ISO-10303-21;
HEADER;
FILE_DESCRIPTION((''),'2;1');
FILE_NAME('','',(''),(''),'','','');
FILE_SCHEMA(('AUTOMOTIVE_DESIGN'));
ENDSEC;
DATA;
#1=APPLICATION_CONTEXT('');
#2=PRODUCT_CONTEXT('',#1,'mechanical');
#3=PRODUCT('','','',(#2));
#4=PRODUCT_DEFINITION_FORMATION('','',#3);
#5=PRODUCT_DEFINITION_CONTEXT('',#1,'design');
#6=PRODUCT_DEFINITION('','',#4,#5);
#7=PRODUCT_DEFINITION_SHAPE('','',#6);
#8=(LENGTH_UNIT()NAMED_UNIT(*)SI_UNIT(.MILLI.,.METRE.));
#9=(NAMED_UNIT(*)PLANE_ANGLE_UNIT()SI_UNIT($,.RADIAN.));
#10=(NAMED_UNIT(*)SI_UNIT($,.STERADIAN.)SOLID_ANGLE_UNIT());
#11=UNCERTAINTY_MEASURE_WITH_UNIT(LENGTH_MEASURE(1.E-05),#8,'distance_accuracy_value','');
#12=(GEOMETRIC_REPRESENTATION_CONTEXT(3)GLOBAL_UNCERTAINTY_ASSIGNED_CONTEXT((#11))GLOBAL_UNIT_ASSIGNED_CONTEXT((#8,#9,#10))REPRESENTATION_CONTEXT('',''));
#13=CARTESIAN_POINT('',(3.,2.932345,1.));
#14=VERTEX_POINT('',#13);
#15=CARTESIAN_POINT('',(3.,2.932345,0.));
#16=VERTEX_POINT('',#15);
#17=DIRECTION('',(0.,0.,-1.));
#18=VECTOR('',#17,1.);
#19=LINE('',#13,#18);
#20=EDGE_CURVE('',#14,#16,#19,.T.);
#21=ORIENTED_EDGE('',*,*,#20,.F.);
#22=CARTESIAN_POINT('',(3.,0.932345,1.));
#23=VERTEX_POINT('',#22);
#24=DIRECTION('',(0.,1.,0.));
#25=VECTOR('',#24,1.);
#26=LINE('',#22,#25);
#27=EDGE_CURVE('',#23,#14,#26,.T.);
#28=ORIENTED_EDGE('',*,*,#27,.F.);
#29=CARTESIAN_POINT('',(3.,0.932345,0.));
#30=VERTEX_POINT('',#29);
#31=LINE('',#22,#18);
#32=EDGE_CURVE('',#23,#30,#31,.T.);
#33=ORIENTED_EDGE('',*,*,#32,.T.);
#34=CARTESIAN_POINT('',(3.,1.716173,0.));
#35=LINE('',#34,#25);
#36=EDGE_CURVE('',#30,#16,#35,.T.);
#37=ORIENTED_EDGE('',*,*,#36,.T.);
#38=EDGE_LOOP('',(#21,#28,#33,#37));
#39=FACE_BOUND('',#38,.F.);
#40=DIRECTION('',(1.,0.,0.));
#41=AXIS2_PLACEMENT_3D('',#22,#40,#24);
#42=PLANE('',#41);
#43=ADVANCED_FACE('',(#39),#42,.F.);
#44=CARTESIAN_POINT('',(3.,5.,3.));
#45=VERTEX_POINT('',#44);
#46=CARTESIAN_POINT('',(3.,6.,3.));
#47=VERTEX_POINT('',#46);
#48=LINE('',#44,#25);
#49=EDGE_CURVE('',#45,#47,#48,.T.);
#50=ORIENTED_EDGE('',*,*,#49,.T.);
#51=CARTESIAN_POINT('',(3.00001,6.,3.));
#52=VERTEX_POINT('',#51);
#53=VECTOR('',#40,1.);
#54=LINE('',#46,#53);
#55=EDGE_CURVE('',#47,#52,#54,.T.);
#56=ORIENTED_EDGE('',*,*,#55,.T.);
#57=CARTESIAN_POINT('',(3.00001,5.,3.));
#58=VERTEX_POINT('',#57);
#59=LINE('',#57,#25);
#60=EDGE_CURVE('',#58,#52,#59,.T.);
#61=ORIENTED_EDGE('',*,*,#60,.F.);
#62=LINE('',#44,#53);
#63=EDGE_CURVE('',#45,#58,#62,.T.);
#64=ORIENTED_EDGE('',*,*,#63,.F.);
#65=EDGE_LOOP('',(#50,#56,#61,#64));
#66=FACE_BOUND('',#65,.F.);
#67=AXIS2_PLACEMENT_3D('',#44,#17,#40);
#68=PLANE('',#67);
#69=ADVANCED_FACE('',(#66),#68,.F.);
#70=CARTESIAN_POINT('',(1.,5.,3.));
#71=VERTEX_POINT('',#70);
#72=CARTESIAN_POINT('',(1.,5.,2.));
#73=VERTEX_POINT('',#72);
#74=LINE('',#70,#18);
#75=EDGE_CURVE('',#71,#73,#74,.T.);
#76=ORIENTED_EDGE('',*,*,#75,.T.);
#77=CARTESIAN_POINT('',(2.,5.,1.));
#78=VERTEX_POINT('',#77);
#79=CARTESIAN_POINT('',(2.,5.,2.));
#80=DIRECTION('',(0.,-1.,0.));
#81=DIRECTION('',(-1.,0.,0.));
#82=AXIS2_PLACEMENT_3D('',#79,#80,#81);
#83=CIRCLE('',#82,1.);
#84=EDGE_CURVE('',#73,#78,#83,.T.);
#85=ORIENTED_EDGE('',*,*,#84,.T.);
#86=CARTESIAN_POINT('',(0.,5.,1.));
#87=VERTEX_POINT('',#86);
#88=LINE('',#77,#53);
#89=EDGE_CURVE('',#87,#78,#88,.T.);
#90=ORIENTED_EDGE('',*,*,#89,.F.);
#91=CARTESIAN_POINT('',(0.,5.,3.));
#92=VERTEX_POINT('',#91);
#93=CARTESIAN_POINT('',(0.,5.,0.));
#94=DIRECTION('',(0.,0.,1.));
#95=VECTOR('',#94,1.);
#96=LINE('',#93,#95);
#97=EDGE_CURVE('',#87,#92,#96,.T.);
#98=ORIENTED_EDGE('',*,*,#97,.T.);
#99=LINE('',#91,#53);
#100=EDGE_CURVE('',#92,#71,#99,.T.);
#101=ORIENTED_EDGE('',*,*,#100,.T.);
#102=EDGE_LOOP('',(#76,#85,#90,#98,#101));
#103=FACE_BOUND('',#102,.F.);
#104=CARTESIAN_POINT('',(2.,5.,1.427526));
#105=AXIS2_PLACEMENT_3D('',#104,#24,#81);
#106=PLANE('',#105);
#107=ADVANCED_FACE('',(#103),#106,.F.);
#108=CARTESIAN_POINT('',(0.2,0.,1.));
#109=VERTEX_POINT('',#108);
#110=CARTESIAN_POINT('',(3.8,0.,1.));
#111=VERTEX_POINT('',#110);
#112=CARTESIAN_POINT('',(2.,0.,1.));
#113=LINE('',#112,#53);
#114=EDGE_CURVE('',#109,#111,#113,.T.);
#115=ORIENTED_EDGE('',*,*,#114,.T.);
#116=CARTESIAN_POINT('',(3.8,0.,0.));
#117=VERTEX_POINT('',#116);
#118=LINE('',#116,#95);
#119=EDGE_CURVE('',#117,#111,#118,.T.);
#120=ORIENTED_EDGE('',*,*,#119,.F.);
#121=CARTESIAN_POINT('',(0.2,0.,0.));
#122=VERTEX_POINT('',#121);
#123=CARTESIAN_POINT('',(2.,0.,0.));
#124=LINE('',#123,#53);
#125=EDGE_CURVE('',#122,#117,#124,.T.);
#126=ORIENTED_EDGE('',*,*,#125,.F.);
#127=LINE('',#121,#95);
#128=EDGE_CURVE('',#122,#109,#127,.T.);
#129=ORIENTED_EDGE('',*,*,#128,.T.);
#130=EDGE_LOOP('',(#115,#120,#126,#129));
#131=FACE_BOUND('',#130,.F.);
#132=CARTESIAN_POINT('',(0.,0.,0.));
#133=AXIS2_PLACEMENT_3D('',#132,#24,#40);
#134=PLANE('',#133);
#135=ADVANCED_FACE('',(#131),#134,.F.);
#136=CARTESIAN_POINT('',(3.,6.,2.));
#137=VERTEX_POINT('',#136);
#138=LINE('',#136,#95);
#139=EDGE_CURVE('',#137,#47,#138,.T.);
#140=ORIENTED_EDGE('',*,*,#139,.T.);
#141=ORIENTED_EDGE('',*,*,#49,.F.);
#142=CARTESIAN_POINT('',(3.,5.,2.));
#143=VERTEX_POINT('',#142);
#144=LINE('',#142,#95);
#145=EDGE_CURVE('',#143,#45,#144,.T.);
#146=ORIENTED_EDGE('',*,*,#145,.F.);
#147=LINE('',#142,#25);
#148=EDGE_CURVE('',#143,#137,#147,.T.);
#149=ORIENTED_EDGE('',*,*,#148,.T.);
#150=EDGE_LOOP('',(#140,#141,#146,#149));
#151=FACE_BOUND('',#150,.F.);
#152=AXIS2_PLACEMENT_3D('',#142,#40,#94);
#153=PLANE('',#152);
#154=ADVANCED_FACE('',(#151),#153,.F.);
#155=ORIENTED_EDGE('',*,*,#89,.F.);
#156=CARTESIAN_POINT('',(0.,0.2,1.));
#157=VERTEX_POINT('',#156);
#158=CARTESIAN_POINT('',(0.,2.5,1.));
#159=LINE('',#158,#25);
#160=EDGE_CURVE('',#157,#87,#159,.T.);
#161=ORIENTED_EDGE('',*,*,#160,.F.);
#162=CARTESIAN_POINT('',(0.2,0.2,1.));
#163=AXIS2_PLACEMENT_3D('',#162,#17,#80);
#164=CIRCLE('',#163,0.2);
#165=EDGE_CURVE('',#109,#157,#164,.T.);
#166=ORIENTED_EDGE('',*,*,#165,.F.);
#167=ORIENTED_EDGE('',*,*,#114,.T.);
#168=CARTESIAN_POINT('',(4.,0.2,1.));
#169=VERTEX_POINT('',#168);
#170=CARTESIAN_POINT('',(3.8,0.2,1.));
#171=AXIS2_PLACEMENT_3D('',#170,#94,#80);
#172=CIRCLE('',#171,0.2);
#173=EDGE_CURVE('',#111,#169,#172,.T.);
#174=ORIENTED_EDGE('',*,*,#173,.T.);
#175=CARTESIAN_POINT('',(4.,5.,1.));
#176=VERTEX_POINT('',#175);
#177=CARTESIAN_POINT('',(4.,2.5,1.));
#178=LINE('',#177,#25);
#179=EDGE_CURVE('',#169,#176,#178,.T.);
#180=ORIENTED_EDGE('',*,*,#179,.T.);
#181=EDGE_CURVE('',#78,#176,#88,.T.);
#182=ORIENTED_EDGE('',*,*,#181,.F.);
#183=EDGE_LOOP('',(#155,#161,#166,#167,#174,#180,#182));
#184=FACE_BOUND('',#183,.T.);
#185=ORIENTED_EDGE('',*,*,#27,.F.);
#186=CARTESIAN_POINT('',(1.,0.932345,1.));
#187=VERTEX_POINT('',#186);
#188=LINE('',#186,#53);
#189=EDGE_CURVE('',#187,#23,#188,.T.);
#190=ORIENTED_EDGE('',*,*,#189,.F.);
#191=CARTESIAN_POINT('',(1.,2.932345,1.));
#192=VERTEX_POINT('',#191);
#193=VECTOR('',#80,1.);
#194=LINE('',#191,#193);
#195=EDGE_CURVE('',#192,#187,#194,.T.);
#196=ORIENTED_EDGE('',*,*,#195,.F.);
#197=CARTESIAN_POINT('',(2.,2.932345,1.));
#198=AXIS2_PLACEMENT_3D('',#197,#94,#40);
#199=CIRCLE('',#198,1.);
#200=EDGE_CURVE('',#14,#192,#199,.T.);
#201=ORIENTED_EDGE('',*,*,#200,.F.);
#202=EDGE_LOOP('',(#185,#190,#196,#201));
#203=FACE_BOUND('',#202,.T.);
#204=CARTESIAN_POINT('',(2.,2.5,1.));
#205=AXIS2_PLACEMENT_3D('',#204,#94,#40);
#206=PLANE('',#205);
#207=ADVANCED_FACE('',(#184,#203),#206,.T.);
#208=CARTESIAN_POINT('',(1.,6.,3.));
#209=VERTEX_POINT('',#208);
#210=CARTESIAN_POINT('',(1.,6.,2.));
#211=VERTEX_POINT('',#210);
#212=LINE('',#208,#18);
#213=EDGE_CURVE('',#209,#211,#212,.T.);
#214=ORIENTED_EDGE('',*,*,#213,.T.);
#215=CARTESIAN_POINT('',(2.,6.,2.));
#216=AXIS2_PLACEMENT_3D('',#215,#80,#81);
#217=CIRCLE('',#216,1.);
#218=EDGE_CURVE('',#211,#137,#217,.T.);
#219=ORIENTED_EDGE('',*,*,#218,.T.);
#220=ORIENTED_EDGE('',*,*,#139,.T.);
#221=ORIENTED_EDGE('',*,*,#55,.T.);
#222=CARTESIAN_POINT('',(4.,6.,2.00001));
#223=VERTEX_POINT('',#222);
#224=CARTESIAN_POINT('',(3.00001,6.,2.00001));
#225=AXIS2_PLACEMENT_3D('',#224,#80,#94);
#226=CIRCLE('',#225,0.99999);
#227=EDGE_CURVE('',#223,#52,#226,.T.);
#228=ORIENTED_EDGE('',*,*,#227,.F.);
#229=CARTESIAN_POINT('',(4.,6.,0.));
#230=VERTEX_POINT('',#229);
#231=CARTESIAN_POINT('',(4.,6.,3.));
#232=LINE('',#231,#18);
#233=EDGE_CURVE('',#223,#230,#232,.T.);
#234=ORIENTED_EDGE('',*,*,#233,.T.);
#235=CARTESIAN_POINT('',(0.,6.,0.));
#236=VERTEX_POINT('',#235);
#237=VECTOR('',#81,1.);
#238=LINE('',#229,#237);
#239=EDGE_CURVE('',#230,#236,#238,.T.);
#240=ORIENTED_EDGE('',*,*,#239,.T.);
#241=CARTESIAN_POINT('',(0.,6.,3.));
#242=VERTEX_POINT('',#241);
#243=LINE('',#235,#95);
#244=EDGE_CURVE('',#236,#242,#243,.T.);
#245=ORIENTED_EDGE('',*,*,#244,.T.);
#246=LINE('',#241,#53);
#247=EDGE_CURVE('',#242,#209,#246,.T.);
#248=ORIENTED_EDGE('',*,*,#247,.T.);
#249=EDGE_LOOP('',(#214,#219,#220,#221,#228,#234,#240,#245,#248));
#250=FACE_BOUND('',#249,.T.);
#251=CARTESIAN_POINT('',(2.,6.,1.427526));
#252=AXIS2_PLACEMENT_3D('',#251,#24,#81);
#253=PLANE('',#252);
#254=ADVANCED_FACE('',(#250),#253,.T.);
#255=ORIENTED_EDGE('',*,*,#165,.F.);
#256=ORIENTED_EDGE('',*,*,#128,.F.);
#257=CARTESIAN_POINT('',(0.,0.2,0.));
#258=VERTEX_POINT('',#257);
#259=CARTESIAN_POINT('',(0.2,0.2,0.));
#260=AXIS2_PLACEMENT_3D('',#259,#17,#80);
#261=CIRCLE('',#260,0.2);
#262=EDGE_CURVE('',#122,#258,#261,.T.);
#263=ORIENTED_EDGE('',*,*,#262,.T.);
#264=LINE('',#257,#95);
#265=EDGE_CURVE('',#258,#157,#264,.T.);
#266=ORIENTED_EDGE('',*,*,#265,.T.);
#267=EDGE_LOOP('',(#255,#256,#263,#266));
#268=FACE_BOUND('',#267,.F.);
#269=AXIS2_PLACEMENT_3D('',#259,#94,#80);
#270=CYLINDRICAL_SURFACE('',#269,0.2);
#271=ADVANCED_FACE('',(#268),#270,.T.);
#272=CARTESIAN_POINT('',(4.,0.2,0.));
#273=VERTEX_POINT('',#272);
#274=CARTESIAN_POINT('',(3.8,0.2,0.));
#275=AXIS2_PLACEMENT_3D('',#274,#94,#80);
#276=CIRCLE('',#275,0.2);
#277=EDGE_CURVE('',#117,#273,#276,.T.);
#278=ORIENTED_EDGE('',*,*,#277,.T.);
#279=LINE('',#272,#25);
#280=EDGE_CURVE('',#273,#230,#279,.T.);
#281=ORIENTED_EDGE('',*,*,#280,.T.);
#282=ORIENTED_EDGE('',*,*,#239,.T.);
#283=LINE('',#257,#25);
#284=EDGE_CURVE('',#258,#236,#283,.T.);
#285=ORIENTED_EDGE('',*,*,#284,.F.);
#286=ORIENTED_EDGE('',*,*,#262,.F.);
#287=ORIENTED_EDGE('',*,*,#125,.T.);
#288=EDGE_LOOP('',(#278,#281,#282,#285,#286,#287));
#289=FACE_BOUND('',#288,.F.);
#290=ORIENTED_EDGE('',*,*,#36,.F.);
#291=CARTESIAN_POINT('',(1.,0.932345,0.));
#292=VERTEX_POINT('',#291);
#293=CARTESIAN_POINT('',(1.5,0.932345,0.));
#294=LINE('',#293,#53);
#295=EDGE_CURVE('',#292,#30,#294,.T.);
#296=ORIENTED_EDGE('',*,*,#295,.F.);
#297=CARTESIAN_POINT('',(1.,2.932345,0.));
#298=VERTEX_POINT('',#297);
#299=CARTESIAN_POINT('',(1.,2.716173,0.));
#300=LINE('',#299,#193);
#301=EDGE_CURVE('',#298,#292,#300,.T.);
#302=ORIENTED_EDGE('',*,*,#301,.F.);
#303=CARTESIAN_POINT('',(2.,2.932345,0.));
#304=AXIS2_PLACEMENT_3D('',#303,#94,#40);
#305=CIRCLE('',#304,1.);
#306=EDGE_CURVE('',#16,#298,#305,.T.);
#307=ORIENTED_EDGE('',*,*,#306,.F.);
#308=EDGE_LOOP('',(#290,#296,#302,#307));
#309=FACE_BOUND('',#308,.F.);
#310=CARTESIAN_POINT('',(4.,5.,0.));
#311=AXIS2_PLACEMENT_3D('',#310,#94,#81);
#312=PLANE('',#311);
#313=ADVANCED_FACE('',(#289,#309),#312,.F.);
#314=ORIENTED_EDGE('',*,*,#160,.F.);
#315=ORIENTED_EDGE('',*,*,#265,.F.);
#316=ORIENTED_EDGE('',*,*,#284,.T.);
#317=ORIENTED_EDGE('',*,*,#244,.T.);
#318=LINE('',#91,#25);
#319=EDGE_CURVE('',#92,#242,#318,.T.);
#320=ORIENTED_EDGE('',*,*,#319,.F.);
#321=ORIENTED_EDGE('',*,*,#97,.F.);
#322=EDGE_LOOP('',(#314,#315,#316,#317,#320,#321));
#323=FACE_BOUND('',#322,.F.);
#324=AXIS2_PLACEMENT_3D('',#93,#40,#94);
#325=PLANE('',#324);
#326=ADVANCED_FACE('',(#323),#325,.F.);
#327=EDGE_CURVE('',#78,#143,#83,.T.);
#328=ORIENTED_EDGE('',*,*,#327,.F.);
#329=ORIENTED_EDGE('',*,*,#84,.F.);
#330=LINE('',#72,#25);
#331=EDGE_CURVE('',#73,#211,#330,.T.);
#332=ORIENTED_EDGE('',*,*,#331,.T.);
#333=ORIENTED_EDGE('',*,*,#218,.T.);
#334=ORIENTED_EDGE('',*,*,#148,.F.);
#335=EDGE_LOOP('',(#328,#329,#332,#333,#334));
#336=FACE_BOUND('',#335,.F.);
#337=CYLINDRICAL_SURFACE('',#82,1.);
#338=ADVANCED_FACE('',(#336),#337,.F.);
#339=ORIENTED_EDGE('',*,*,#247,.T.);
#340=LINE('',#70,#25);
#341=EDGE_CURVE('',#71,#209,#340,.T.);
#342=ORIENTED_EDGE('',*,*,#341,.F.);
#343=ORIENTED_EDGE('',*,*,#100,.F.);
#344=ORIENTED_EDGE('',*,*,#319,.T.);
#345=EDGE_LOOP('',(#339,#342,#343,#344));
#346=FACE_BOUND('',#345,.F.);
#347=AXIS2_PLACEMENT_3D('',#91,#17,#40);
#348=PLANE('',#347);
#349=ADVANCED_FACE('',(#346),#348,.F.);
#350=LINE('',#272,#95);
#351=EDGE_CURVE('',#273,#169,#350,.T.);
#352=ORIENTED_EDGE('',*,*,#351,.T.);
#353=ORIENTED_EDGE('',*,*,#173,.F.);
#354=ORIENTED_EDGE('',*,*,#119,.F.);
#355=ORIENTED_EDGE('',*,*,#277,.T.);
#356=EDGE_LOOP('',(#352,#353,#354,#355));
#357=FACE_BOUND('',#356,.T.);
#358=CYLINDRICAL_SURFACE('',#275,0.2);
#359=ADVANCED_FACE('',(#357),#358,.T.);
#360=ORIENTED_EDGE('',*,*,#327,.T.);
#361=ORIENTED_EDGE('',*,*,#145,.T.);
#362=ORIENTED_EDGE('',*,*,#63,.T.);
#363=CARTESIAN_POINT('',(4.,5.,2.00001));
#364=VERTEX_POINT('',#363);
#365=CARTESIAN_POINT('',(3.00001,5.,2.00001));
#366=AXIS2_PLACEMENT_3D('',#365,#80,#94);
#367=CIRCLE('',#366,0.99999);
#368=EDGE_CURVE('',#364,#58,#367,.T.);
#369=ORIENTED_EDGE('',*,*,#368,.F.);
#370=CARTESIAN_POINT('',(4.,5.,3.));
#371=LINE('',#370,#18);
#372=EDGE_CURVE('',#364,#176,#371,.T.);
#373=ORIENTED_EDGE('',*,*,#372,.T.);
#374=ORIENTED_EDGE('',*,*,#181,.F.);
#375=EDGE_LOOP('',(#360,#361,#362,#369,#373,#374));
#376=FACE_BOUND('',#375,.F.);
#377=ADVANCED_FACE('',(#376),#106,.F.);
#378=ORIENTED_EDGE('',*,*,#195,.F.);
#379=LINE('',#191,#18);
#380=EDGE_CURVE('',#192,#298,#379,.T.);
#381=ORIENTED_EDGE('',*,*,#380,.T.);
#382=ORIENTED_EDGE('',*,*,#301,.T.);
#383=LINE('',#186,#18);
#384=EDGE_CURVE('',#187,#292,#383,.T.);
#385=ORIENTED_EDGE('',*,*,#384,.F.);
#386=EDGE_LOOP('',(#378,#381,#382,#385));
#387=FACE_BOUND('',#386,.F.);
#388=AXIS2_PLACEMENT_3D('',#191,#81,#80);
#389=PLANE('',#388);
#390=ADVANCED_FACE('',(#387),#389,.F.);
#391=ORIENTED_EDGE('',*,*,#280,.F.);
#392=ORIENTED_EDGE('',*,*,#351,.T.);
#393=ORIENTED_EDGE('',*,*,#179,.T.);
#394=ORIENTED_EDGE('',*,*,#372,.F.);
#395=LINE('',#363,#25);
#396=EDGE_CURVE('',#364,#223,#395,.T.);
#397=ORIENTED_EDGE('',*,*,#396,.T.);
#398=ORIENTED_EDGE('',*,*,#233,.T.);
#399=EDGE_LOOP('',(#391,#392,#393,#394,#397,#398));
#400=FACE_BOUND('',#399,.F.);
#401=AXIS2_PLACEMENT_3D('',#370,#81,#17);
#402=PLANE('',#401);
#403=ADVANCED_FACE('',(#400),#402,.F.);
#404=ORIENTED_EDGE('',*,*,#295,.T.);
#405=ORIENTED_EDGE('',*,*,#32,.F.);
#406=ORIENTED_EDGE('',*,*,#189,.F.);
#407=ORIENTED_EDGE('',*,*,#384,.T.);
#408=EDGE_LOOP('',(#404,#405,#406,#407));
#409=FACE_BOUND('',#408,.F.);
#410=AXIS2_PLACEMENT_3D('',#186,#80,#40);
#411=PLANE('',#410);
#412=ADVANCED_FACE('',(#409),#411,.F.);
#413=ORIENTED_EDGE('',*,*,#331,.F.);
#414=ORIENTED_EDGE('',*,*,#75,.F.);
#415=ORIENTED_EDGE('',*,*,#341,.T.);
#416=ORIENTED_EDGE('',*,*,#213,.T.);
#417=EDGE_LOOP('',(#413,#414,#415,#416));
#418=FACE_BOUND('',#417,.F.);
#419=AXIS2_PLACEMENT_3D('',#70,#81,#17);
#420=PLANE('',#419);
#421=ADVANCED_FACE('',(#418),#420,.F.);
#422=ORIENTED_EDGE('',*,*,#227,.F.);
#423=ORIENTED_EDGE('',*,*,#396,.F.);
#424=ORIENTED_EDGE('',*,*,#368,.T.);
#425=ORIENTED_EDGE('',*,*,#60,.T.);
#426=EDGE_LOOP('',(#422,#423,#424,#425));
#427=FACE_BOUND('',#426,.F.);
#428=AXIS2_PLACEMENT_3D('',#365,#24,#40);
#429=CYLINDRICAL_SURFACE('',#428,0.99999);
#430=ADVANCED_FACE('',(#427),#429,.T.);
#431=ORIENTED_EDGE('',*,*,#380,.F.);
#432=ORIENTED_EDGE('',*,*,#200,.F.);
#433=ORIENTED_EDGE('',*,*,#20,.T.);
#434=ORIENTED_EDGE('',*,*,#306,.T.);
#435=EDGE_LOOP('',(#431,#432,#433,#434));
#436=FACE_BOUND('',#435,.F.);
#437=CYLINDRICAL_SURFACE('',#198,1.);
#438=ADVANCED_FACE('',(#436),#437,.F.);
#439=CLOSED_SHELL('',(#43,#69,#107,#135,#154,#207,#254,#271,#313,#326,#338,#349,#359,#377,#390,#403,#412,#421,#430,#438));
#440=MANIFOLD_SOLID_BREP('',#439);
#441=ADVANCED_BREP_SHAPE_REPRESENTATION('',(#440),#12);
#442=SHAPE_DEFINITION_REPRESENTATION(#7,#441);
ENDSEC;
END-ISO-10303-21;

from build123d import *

# Parameters (mm, degrees)
F0_W     = 4
F0_H     = 5
F1_DEPTH = 1
F2_R     = 0.2
F3_R     = 0.2
F5_DEPTH = 25
F7_DEPTH = 1
F8_R     = 0.99999


# Not quite as in the source:
# - a fillet or chamfer is up to 0.001 mm smaller than in the source, because OpenCascade refuses the exact size


with BuildPart() as f1:
    # F0 (on Top) → F1 (new body)
    with BuildSketch(Plane.XY):
        with Locations((2, 2.5)):
            Rectangle(F0_W, F0_H)
    extrude(amount=F1_DEPTH)

    # F2
    f2_edges = [f1.edges().sort_by_distance(p)[0] for p in [
        (4, 0, 0.5),
    ]]
    fillet(f2_edges, radius=F2_R)

    # F3
    f3_edges = [f1.edges().sort_by_distance(p)[0] for p in [
        (0, 0, 0.5),
    ]]
    fillet(f3_edges, radius=F3_R)

    # F4 (on face) → F5 (cut)
    with BuildSketch(Plane.XY.offset(1)):
        with BuildLine():
            Line((1, 2.9323451086), (1, 0.9323451086))
            Line((1, 0.9323451086), (3, 0.9323451086))
            Line((3, 0.9323451086), (3, 2.9323451086))
            ThreePointArc((3, 2.9323451086), (2, 3.9323451086), (1, 2.9323451086))
        make_face()
    extrude(amount=-F5_DEPTH, mode=Mode.SUBTRACT)

    # F6 (on face) → F7 (join)
    with BuildSketch(Plane(origin=(0, 5, 0), x_dir=(-1, 0, 0), z_dir=(0, 1, 0))):
        with BuildLine():
            Line((-4, 3), (-4, 1))
            Line((-4, 1), (-4, 0))
            Line((-4, 0), (0, 0))
            Line((0, 0), (0, 1))
            Line((0, 1), (0, 3))
            Line((0, 3), (-1, 3))
            Line((-1, 3), (-1, 2))
            ThreePointArc((-1, 2), (-2, 1), (-3, 2))
            Line((-3, 2), (-3, 3))
            Line((-3, 3), (-4, 3))
        make_face()
    extrude(amount=F7_DEPTH)

    # F8 (radius 1 in the source; OpenCascade refuses exactly that, so slightly less here)
    f8_edges = [f1.edges().sort_by_distance(p)[0] for p in [
        (4, 5.5, 3),
    ]]
    fillet(f8_edges, radius=F8_R)


solid = f1.part
